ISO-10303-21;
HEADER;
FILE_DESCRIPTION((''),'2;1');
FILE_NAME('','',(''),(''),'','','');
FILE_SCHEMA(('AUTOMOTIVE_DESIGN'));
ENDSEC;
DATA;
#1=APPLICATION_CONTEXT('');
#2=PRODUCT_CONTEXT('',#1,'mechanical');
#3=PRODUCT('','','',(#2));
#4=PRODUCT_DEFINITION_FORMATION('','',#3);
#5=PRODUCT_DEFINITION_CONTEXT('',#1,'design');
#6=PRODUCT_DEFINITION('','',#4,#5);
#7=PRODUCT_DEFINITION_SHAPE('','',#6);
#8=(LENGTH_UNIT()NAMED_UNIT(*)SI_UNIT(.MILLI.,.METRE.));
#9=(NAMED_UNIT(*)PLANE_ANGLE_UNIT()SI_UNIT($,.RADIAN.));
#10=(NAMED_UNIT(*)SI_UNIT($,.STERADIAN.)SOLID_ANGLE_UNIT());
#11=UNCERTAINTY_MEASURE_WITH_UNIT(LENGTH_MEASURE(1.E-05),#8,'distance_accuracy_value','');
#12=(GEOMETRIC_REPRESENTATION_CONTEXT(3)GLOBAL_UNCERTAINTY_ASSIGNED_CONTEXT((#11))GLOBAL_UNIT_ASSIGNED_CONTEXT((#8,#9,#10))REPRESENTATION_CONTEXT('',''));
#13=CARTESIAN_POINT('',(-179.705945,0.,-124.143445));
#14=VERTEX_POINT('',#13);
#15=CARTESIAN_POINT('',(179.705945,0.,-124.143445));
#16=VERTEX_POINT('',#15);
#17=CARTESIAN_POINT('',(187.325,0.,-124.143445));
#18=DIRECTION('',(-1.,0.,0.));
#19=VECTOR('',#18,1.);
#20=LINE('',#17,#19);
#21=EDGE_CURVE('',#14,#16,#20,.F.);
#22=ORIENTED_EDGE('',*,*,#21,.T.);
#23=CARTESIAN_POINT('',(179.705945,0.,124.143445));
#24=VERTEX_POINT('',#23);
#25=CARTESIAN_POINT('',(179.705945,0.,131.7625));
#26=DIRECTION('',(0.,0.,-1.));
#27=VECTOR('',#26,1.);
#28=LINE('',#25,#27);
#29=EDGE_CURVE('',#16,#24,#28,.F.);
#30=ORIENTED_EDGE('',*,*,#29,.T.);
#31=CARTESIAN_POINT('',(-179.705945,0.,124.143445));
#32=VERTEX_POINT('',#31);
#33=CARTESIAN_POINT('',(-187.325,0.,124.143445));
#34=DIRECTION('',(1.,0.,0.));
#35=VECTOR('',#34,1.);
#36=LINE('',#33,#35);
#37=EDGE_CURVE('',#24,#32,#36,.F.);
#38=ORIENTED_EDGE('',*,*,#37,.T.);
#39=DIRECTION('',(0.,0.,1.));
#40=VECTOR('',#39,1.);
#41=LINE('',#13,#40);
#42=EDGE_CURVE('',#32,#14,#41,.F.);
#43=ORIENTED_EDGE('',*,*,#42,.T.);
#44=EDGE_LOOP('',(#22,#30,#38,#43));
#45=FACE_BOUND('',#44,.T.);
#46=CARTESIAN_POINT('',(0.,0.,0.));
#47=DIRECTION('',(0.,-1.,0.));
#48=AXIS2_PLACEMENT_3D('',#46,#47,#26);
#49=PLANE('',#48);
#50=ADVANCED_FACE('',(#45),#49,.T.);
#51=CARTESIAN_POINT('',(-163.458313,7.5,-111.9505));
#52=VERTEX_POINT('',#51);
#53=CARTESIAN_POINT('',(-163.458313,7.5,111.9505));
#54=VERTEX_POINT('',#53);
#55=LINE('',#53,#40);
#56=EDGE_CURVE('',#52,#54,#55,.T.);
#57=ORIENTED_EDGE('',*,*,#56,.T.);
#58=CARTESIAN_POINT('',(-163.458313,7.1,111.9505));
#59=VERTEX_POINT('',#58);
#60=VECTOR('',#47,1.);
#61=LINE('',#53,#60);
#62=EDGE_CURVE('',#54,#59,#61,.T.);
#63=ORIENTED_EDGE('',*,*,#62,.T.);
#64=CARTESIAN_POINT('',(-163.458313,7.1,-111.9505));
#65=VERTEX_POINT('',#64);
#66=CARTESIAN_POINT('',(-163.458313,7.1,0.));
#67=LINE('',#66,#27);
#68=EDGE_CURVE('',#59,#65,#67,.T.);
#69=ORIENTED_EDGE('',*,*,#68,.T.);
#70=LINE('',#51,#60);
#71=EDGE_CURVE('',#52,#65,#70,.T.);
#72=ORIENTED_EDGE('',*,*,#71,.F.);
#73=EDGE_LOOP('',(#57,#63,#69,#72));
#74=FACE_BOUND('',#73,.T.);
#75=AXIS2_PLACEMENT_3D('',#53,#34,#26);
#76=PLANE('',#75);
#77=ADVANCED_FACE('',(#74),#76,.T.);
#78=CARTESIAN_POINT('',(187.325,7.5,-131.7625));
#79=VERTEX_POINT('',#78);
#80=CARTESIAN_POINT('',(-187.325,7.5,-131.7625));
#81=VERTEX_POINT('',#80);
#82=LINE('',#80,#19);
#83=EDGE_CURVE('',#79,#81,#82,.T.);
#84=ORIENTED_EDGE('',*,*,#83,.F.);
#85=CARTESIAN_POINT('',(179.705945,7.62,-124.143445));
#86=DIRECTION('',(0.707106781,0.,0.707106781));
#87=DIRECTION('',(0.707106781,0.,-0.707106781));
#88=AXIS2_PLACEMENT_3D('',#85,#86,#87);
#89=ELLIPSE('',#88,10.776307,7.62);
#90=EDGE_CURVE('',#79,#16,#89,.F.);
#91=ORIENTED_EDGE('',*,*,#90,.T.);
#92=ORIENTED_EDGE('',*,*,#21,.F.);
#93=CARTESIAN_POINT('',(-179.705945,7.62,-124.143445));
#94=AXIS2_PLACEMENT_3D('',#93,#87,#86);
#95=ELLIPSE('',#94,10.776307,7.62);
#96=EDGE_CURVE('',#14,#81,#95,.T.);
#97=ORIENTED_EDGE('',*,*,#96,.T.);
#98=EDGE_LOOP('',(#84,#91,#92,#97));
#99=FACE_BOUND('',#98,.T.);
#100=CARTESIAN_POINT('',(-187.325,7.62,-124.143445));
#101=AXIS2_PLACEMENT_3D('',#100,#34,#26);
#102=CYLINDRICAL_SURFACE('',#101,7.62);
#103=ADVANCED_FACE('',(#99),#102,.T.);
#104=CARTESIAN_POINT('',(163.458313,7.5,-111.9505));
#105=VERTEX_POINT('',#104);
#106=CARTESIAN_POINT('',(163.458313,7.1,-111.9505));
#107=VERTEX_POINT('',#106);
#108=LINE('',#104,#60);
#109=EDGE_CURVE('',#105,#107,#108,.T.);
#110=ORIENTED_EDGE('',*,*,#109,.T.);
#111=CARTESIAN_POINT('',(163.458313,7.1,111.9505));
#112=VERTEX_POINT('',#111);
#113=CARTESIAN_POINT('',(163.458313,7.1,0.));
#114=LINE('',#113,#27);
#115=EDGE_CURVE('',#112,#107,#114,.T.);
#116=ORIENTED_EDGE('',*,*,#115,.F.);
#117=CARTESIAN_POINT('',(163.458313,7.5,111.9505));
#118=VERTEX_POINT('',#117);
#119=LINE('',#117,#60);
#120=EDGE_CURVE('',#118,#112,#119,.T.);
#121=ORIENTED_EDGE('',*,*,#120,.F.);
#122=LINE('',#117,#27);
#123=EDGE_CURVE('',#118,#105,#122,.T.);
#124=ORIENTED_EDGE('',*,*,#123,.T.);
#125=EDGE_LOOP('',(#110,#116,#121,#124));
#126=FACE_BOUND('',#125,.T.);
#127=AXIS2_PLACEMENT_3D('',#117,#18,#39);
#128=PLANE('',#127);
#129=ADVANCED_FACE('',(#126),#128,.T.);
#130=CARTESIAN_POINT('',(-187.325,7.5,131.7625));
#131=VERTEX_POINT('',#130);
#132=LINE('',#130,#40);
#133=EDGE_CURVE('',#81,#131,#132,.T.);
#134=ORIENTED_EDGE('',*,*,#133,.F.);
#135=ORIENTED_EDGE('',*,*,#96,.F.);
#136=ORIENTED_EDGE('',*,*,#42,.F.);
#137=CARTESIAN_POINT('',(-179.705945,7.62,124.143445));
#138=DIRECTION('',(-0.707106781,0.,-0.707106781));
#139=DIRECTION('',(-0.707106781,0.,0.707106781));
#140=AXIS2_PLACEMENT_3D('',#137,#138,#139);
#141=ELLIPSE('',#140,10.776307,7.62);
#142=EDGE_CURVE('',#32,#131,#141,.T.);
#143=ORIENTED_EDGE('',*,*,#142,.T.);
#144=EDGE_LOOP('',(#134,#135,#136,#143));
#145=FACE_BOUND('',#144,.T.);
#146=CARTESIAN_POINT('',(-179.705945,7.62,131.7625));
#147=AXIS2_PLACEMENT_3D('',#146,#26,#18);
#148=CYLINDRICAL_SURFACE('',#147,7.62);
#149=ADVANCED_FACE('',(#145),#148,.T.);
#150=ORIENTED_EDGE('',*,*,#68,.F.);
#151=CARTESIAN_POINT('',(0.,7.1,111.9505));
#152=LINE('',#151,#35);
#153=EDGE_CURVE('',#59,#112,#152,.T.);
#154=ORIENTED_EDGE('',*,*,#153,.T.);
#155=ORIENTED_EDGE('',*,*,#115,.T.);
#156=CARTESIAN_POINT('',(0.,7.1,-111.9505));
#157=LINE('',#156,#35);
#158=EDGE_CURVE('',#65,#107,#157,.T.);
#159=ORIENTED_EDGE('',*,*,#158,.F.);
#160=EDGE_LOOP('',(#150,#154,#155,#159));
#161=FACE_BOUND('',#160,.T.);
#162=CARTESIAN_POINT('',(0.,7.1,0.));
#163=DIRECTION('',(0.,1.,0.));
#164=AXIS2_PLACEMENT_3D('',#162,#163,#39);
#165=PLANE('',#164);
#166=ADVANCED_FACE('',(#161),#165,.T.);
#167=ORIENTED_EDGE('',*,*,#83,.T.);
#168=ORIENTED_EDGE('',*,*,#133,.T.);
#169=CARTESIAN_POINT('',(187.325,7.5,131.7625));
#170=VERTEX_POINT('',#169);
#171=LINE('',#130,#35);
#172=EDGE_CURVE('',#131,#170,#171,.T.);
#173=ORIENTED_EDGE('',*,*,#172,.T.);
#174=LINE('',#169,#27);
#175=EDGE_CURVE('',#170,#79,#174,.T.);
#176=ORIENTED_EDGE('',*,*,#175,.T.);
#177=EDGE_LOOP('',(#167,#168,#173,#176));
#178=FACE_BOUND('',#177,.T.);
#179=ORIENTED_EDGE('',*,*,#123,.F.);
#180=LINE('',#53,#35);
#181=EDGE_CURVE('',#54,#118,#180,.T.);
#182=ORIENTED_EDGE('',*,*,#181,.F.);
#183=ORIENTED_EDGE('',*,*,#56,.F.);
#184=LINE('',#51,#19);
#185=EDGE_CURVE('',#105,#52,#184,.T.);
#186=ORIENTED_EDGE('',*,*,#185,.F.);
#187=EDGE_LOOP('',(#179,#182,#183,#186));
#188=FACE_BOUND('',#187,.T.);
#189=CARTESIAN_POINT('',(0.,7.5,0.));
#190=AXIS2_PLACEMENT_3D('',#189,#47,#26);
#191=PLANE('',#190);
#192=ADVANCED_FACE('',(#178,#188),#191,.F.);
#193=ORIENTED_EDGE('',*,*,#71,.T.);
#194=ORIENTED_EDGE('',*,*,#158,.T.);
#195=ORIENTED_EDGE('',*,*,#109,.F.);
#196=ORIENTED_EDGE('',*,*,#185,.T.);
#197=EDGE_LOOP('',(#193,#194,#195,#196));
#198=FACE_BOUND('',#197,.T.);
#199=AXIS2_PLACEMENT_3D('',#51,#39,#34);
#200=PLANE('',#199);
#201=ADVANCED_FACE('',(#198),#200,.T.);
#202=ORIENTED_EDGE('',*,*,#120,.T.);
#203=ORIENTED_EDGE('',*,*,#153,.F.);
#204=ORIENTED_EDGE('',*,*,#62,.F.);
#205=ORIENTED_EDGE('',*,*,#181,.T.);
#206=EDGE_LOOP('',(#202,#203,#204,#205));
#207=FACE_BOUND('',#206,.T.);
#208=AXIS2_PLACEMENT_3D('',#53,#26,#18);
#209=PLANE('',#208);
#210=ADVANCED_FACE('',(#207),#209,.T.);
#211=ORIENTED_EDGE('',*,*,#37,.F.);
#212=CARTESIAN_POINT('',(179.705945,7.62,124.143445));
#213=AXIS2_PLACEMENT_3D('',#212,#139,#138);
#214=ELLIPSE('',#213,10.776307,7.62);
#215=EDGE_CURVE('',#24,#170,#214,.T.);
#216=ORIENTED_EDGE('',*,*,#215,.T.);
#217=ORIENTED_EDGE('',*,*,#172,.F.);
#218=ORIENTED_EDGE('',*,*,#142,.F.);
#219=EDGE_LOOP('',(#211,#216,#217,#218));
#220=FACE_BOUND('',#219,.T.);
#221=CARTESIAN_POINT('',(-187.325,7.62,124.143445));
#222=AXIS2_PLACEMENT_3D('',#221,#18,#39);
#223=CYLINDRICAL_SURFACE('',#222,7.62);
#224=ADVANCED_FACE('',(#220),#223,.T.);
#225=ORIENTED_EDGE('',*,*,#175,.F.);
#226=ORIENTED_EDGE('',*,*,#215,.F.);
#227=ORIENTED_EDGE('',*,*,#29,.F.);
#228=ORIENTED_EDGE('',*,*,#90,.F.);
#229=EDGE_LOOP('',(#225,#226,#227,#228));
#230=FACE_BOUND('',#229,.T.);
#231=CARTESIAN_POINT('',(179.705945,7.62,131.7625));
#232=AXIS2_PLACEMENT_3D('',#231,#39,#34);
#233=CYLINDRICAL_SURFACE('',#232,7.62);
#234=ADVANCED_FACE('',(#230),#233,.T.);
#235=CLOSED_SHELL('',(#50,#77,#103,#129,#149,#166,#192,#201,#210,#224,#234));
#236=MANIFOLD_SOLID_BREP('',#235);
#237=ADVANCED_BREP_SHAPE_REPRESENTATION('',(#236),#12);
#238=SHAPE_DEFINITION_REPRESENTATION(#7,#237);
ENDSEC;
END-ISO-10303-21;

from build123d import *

# Parameters (mm, degrees)
SKETCH1_W           = 374.65
SKETCH1_H           = 263.525
SKETCH1_W_2         = 326.91662515
SKETCH1_H_2         = 223.901
BOSS_EXTRUDE1_DEPTH = 7.5
SKETCH1_2_W         = 326.91662515
SKETCH1_2_H         = 223.901
BOSS_EXTRUDE2_DEPTH = 7.1
FILLET1_R           = 7.62
FILLET2_R           = 7.62


with BuildPart() as part:
    # Sketch1 → Boss-Extrude1 (new body)
    with BuildSketch(Plane(origin=(0, 0, 0), x_dir=(1, 0, 0), z_dir=(0, 1, 0))):
        Rectangle(SKETCH1_W, SKETCH1_H)
        Rectangle(SKETCH1_W_2, SKETCH1_H_2, mode=Mode.SUBTRACT)
    extrude(amount=BOSS_EXTRUDE1_DEPTH)

    # Sketch1<2> → Boss-Extrude2 (add)
    with BuildSketch(Plane(origin=(0, 0, 0), x_dir=(1, 0, 0), z_dir=(0, 1, 0))):
        Rectangle(SKETCH1_2_W, SKETCH1_2_H)
    extrude(amount=BOSS_EXTRUDE2_DEPTH)

    # Fillet1
    # the kernel refuses this fillet: 7.62 mm, written as the material it takes off along each edge
    with BuildSketch(Plane(origin=(206.375, 0, -131.7625), x_dir=(0, 0, 1), z_dir=(-1, 0, 0))) as fillet1_piece_1:
        with BuildLine():
            CenterArc((FILLET1_R, FILLET1_R), FILLET1_R, 180, 90)
            Line((0, FILLET1_R), (0, 0))
            Line((0, 0), (FILLET1_R, 0))
        make_face()
    extrude(amount=412.75, mode=Mode.SUBTRACT)

    # Fillet2
    # the kernel refuses this fillet: 7.62 mm, written as the material it takes off along each edge
    with BuildSketch(Plane(origin=(-187.325, 0, -143.190137649), x_dir=(0, 1, 0), z_dir=(0, 0, 1)), Plane(origin=(187.325, 0, 150.810137649), x_dir=(0, 1, 0), z_dir=(0, 0, -1))) as fillet2_piece_1:
        with BuildLine():
            CenterArc((7.62, -7.61905506), FILLET2_R, 90.902333039, 89.097666961)
            Line((0, -7.61905506), (-0.1524, -7.61905506))
            Line((-0.1524, -7.61905506), (-0.1524, 0))
            Line((-0.1524, 0), (0, 0.1524))
            ThreePointArc((0, 0.1524), (3.75, 0.1524), (7.4976, 0.152381101))
            Line((7.4976, 0.152381101), (7.5, 0))
        make_face()
    extrude(amount=294.000275298, mode=Mode.SUBTRACT)
    with BuildSketch(Plane(origin=(-206.372637649, 0, 131.7625), x_dir=(0, 1, 0), z_dir=(1, 0, 0))) as fillet2_piece_2:
        with BuildLine():
            CenterArc((7.62, -7.61905506), FILLET2_R, 90.902333039, 89.097666961)
            Line((0, -7.61905506), (-0.1524, -7.61905506))
            Line((-0.1524, -7.61905506), (-0.1524, 0))
            Line((-0.1524, 0), (0, 0.1524))
            ThreePointArc((0, 0.1524), (3.75, 0.1524), (7.4976, 0.152381101))
            Line((7.4976, 0.152381101), (7.5, 0))
        make_face()
    extrude(amount=412.745275298, mode=Mode.SUBTRACT)


solid = part.part
